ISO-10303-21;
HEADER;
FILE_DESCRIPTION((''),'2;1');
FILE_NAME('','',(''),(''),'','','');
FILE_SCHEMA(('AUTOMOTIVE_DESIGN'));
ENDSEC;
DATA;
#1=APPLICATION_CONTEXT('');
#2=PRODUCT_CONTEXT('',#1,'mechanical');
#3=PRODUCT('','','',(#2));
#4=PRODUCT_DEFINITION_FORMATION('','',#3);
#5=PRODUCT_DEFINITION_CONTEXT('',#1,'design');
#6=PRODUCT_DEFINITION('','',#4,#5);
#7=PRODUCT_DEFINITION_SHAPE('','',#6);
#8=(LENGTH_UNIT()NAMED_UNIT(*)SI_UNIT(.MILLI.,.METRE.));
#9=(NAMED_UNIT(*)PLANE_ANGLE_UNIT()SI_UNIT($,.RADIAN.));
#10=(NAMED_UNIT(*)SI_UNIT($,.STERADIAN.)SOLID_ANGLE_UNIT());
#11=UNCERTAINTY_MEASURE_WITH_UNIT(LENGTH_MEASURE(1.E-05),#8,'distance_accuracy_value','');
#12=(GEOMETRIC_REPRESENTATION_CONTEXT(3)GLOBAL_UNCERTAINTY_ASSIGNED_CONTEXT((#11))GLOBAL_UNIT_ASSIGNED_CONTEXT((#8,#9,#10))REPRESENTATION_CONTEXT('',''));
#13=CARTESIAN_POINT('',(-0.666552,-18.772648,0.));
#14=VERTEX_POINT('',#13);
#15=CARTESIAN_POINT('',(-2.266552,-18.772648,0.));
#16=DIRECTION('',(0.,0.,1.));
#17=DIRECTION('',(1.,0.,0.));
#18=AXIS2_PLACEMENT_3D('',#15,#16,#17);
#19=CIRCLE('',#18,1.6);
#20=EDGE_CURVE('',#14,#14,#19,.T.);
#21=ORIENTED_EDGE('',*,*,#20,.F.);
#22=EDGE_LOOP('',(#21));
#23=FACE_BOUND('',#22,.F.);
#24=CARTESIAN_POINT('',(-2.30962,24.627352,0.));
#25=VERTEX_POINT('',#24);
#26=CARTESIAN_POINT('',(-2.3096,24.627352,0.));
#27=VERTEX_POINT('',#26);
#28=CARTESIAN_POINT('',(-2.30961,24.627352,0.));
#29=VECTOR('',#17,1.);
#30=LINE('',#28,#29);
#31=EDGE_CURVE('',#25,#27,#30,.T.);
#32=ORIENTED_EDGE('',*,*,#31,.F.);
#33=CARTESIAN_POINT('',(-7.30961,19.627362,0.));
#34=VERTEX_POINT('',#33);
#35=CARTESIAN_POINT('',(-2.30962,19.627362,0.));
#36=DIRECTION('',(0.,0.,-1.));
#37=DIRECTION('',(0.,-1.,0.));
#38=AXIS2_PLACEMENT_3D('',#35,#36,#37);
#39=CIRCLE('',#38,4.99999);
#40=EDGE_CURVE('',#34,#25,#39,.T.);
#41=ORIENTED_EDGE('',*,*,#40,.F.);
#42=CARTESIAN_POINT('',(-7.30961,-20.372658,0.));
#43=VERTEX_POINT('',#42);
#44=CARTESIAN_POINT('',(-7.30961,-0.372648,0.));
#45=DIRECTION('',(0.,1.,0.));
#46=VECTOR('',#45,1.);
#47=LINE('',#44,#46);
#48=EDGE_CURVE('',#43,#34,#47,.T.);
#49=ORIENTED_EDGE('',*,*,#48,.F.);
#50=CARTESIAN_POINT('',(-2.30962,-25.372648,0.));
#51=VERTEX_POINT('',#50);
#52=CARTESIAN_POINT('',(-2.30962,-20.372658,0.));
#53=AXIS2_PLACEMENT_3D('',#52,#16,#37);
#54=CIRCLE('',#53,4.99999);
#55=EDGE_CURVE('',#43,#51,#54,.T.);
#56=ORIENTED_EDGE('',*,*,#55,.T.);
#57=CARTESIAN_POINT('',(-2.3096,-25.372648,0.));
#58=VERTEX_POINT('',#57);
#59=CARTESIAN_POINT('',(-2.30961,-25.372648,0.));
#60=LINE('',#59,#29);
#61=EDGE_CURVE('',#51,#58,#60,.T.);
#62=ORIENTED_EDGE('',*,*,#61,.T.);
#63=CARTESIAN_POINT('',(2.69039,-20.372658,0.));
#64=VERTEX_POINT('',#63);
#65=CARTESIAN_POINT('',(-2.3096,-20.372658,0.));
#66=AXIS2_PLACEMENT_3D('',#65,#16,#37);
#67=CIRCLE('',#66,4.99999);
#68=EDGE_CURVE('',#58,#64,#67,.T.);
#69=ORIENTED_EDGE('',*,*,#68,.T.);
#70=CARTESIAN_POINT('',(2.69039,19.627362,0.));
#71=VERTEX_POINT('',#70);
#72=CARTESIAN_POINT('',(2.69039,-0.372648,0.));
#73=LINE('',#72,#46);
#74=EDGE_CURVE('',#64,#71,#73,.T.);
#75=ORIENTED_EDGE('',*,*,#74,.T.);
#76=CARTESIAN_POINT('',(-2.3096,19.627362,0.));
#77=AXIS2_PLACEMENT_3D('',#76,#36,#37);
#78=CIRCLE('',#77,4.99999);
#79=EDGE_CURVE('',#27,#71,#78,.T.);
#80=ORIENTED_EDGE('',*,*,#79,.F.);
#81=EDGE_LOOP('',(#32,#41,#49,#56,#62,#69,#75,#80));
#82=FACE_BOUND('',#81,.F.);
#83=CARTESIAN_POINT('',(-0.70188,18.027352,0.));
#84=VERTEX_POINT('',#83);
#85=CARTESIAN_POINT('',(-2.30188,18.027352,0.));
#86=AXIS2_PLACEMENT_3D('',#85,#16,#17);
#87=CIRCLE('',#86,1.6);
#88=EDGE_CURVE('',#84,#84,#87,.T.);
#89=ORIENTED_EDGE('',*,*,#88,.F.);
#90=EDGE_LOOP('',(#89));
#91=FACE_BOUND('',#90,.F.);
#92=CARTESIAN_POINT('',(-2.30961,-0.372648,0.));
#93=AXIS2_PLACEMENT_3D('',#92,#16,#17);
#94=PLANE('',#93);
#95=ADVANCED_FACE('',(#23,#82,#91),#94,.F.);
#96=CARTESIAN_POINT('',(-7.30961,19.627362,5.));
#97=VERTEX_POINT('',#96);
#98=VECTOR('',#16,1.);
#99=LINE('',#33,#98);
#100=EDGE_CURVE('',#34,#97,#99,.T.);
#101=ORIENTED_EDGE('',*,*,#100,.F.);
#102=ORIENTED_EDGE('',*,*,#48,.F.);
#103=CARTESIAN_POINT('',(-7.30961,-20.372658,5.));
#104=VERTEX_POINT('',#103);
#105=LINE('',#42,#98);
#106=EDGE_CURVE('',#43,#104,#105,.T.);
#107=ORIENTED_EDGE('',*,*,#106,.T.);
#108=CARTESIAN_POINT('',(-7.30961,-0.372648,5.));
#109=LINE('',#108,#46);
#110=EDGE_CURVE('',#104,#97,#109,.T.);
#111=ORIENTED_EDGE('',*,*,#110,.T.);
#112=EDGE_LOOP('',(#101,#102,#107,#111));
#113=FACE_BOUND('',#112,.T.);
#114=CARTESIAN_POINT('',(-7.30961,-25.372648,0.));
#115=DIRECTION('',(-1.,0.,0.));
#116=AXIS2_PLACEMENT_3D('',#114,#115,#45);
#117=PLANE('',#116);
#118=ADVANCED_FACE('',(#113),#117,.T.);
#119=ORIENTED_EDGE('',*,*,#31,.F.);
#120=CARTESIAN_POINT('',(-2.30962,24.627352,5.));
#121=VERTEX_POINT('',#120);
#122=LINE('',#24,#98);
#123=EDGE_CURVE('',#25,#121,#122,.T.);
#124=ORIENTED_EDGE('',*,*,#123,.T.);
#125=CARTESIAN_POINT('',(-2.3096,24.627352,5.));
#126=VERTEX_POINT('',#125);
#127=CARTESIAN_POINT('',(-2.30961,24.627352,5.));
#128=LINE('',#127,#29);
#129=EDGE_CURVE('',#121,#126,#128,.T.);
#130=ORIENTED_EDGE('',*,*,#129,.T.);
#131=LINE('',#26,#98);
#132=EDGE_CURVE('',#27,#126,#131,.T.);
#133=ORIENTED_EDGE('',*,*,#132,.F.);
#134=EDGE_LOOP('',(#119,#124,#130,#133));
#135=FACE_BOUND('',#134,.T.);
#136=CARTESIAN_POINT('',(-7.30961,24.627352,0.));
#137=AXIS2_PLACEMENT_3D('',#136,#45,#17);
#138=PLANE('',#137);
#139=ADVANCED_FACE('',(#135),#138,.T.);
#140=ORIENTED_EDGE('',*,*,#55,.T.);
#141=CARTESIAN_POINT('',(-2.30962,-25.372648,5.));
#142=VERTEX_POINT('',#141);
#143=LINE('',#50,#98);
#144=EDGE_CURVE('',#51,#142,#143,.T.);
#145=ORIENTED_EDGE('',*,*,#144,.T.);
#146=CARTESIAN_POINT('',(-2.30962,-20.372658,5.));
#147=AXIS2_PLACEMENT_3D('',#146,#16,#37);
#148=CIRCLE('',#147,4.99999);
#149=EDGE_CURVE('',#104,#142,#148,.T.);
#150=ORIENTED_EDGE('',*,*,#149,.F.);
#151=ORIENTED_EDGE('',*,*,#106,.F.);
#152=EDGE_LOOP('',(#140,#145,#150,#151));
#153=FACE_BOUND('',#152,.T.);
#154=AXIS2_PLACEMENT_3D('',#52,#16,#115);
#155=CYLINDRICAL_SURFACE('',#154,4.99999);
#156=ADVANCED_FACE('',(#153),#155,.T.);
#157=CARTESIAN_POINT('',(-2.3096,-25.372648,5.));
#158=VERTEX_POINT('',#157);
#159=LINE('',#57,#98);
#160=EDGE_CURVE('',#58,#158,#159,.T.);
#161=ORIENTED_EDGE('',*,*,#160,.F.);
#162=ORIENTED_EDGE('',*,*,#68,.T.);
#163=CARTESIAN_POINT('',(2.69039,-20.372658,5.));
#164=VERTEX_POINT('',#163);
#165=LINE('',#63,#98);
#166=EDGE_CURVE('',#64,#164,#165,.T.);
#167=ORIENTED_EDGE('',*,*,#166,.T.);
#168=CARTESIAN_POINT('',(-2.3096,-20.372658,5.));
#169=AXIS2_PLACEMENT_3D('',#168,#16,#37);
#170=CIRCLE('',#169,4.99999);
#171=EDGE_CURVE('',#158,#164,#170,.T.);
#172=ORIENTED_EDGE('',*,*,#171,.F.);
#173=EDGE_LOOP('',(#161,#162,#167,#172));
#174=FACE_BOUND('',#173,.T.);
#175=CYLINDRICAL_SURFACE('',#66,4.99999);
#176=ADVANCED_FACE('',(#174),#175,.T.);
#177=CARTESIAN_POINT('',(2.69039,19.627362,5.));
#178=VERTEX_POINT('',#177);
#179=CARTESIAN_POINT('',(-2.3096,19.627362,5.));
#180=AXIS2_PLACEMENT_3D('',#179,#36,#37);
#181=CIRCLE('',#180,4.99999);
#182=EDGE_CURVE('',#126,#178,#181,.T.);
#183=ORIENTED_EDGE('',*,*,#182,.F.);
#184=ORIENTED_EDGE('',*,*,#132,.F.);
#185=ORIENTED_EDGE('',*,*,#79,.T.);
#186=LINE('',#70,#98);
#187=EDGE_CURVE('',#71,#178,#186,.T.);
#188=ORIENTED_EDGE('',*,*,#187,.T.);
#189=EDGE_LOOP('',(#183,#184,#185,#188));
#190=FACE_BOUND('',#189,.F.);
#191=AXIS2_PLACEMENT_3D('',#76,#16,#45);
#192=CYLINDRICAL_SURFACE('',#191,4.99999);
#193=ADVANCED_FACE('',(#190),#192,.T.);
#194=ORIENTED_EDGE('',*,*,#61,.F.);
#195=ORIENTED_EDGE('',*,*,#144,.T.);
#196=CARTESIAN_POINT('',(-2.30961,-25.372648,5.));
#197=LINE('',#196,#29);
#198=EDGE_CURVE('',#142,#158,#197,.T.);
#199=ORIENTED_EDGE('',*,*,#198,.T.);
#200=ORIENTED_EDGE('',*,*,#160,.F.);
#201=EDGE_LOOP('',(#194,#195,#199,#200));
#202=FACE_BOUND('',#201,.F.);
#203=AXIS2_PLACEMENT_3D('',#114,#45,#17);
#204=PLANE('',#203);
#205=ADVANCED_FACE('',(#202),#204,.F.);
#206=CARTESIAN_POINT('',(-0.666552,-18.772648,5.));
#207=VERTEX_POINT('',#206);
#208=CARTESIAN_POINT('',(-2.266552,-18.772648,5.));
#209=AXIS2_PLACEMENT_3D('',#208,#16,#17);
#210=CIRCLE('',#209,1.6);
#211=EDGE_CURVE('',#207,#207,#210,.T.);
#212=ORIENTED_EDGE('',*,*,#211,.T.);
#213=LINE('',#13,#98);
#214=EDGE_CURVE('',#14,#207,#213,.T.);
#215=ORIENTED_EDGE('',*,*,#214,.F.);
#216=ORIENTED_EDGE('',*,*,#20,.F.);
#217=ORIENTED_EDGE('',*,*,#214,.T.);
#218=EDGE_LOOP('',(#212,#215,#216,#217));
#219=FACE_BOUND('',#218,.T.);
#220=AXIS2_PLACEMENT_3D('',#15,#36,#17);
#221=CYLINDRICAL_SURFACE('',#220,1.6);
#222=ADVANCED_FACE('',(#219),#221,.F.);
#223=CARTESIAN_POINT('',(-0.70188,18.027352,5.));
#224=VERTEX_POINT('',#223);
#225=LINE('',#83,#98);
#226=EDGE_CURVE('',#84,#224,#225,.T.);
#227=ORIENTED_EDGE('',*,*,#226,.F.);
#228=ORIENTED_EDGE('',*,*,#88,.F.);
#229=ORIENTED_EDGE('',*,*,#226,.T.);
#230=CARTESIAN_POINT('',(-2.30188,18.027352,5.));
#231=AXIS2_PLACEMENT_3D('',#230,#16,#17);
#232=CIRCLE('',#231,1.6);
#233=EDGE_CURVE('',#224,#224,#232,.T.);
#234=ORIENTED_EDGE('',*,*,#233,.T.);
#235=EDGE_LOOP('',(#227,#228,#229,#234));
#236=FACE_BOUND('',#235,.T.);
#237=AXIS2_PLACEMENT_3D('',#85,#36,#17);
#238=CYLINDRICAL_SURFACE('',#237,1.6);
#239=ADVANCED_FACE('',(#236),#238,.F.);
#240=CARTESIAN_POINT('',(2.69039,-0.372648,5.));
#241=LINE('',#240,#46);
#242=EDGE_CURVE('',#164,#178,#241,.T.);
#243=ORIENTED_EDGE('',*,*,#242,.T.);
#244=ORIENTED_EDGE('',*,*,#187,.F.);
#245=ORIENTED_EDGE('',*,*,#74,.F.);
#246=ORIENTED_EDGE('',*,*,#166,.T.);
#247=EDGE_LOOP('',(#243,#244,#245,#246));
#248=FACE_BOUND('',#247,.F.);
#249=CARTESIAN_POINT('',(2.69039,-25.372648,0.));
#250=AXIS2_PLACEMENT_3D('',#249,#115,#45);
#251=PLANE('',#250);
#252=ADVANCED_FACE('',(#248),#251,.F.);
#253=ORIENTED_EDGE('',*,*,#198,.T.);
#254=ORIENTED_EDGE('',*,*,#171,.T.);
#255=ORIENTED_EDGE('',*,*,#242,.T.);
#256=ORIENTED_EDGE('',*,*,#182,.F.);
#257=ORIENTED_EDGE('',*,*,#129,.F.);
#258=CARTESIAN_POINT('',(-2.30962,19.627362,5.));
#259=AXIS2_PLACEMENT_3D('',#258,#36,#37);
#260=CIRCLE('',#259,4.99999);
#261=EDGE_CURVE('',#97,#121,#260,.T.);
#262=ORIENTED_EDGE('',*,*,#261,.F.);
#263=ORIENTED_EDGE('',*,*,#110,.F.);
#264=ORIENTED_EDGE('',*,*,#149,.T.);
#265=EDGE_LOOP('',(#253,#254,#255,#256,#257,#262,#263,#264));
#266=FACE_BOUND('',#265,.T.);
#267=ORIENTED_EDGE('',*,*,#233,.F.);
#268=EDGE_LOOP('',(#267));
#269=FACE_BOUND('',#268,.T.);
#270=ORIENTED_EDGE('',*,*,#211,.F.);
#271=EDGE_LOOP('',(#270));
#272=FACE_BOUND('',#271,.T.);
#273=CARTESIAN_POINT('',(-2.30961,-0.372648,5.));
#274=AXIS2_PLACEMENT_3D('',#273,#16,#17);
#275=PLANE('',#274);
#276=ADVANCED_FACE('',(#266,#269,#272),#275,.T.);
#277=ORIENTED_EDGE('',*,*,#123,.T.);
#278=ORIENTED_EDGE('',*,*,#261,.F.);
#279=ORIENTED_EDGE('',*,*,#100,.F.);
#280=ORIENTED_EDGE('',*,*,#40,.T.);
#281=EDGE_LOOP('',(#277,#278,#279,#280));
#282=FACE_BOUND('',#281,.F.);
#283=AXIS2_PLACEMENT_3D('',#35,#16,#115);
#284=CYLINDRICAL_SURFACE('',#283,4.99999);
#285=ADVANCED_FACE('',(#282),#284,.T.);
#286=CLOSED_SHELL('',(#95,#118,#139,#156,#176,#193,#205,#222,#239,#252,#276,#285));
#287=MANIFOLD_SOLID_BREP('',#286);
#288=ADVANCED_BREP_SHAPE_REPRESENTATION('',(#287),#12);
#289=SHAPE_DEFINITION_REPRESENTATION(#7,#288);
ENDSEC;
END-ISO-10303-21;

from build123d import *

# Parameters (mm, degrees)
F0_W     = 10
F0_H     = 50
F0_R     = 1.6
F1_DEPTH = 5
F2_R     = 4.99999


# Not quite as in the source:
# - a fillet or chamfer is up to 0.001 mm smaller than in the source, because OpenCascade refuses the exact size


with BuildPart() as f1:
    # F0 (on Top) → F1 (new body)
    with BuildSketch(Plane.XY):
        with Locations((-2.3096096679, -0.3726480128)):
            Rectangle(F0_W, F0_H)
        with Locations((-2.2665521668, -18.7726480128)):
            Circle(F0_R, mode=Mode.SUBTRACT)
        with Locations((-2.3018803907, 18.0273519872)):
            Circle(F0_R, mode=Mode.SUBTRACT)
    extrude(amount=F1_DEPTH)

    # F2 (radius 5 in the source; OpenCascade refuses exactly that, so slightly less here)
    f2_edges = [f1.edges().sort_by_distance(p)[0] for p in [
        (2.69039, -25.372648, 2.5),
        (-7.30961, -25.372648, 2.5),
        (2.69039, 24.627352, 2.5),
        (-7.30961, 24.627352, 2.5),
    ]]
    fillet(f2_edges, radius=F2_R)


solid = f1.part
